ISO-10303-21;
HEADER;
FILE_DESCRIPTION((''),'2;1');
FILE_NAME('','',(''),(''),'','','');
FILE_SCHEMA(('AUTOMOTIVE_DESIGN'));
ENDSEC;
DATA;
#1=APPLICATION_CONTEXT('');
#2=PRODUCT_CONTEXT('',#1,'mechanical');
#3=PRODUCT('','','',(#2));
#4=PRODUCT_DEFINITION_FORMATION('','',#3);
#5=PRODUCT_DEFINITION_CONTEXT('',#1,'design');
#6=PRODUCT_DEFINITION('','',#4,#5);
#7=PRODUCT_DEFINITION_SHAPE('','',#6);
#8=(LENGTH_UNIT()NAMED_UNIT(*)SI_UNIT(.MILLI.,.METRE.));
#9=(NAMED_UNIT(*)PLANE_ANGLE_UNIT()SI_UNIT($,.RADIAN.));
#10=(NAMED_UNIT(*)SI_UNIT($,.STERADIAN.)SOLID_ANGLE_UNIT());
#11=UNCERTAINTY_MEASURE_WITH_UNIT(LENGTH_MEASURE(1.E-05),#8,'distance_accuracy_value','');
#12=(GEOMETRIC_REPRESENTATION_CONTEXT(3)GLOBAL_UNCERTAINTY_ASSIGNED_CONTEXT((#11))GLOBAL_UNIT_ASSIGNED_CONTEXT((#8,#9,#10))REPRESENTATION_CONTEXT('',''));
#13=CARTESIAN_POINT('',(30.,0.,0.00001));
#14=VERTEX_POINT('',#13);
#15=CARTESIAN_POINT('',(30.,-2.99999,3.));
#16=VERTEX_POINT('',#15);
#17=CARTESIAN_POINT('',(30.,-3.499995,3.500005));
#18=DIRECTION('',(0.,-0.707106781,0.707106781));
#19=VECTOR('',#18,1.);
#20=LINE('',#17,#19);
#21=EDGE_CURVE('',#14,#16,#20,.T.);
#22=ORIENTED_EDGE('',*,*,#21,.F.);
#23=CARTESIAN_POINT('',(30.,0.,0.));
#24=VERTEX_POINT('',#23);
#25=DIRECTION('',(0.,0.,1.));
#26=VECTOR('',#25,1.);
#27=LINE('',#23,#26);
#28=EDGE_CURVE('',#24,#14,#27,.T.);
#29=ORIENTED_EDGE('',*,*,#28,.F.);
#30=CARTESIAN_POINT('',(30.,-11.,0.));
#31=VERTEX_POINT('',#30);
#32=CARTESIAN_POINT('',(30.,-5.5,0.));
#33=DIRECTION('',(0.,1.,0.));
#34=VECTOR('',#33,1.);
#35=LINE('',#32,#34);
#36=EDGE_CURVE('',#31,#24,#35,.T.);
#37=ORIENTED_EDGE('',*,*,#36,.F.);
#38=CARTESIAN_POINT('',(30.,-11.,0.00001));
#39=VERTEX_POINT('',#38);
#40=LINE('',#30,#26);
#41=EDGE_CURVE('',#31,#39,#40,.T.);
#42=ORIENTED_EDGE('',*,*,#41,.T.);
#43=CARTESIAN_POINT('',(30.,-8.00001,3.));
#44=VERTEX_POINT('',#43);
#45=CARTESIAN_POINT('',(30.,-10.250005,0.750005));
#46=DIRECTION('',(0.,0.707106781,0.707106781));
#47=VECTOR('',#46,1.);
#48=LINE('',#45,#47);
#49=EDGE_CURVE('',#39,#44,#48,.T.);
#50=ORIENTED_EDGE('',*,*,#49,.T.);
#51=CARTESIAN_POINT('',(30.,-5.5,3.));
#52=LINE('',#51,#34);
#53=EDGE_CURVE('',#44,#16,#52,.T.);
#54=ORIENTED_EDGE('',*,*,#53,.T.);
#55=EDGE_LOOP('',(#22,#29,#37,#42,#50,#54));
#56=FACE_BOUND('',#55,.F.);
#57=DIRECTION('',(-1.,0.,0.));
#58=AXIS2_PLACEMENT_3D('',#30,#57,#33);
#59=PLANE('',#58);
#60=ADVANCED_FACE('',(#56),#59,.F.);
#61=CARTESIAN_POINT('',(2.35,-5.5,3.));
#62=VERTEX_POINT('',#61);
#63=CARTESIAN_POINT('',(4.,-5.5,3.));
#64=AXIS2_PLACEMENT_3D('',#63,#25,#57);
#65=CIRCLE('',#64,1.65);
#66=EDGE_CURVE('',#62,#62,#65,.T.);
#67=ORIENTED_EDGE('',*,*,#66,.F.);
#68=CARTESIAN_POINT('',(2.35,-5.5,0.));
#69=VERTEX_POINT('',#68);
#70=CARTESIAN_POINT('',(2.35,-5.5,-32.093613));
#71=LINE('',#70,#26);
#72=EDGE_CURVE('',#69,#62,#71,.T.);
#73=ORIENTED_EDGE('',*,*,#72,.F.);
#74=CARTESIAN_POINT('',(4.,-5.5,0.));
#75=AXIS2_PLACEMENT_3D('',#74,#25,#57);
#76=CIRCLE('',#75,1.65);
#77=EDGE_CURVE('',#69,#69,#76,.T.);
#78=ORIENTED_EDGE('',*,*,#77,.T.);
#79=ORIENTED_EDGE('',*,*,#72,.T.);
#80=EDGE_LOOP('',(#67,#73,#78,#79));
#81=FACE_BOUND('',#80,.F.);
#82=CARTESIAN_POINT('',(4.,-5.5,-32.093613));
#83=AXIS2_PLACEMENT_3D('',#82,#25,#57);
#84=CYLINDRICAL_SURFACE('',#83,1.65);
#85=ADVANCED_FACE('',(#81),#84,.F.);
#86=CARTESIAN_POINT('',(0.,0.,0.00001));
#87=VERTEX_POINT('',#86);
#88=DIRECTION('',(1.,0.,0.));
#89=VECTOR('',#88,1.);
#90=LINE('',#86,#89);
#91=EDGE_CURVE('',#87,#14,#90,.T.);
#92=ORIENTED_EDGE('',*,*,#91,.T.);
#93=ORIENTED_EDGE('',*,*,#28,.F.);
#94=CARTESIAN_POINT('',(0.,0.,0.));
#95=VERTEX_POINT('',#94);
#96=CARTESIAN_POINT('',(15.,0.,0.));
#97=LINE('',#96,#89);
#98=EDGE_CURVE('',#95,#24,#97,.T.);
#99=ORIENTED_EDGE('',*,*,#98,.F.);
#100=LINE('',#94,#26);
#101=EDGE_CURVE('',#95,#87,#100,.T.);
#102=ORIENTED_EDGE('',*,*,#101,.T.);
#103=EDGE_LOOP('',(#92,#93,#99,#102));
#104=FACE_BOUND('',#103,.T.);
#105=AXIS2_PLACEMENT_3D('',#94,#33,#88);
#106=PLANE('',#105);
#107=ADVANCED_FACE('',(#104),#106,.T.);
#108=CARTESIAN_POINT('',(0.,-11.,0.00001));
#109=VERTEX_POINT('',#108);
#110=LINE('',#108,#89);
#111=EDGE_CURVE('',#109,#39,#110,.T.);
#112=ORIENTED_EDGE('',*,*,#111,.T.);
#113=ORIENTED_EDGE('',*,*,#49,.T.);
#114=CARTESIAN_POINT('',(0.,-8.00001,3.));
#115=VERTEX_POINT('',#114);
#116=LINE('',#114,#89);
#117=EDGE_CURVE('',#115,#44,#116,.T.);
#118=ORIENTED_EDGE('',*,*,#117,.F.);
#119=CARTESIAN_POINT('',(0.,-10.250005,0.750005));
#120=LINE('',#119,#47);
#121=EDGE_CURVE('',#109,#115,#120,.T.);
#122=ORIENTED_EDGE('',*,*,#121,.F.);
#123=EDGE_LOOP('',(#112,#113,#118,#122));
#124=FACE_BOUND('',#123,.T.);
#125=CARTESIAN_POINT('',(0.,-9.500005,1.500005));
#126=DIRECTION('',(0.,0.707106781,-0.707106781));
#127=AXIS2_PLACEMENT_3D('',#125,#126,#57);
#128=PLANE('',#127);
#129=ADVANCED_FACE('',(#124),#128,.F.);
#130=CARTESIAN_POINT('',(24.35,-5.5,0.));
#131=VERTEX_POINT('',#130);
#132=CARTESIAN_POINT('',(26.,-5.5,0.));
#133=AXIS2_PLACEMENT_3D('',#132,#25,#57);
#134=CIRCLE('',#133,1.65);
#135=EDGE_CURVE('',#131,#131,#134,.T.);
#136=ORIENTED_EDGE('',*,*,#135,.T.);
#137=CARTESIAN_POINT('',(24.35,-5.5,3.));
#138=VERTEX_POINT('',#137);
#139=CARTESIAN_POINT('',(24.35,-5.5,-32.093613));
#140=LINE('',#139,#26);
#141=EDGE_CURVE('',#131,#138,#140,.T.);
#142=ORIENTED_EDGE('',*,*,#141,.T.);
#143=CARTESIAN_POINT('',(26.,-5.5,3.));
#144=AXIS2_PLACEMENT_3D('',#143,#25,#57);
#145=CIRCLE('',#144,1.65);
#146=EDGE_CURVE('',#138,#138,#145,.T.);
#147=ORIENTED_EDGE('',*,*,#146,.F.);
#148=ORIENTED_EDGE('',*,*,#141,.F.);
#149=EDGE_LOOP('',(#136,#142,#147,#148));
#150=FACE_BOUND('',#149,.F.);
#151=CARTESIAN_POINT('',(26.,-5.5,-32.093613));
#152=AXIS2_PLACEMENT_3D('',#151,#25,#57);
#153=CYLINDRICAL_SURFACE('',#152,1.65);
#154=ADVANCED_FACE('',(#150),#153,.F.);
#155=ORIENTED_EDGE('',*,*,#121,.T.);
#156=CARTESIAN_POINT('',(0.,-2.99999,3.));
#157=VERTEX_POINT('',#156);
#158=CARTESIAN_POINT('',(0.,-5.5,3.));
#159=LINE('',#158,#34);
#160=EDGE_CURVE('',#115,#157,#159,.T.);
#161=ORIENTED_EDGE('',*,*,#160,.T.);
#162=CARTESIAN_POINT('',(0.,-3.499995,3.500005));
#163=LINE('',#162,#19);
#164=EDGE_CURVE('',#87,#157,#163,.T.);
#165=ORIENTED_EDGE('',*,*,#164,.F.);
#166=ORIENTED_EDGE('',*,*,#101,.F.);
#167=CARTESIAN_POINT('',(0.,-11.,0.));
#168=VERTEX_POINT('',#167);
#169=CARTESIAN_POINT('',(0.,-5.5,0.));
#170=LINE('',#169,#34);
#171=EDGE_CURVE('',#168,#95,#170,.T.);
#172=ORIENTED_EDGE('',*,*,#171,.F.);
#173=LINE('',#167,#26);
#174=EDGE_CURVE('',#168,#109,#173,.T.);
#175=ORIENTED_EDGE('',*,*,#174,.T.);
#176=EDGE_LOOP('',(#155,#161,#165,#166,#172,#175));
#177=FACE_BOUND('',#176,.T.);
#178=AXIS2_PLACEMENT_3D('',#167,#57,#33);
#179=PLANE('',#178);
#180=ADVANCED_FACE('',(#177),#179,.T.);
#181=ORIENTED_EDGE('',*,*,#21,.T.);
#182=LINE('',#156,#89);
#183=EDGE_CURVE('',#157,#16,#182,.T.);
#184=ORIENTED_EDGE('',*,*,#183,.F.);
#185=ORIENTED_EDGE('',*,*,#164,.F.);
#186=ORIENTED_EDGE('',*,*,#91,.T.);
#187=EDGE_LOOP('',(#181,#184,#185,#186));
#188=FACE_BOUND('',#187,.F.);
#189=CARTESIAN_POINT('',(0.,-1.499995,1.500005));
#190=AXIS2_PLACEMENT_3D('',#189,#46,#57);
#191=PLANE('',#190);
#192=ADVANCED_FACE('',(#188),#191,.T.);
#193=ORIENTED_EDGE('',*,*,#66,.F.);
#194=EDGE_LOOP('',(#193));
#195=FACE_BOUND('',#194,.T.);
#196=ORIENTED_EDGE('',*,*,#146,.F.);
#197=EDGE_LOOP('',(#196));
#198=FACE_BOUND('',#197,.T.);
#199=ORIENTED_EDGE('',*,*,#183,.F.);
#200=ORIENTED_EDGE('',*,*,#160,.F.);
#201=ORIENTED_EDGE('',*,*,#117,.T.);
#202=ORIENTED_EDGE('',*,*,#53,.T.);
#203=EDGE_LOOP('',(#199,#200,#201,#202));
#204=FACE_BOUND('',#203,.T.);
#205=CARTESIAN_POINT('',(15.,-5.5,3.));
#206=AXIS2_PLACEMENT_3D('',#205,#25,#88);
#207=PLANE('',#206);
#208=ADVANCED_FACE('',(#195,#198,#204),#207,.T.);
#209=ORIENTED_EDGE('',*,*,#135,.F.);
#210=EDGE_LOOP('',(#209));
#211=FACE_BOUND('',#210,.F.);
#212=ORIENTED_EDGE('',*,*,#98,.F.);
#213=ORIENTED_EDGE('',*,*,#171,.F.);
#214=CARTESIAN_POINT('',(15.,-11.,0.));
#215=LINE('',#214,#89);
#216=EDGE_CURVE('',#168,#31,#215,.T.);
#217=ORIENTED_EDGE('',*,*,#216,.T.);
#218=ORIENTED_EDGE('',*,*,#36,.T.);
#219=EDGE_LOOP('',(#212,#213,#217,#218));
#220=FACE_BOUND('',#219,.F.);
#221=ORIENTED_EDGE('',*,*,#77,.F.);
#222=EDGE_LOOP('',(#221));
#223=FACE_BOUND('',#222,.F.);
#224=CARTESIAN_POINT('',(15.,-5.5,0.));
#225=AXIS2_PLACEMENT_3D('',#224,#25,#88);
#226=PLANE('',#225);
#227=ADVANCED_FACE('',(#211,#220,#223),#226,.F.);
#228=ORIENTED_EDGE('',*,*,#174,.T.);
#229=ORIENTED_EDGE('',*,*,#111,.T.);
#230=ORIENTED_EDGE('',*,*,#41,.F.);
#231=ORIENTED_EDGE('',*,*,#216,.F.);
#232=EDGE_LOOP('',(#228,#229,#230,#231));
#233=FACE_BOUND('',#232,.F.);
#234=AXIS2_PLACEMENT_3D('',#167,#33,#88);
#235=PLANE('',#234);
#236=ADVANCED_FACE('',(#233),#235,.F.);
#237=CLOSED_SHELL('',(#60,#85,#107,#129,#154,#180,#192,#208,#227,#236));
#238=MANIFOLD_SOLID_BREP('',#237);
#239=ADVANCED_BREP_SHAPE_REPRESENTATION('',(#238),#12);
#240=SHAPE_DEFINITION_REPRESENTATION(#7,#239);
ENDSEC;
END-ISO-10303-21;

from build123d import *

# Parameters (mm, degrees)
F0_W     = 30
F0_H     = 11
F1_DEPTH = 3
F2_SIZE2 = 2.99999
F2_SIZE  = 2.99999
F3_D     = 3.3


# Not quite as in the source:
# - a fillet or chamfer is up to 0.001 mm smaller than in the source, because OpenCascade refuses the exact size


with BuildPart() as f1:
    # F0 (on Top) → F1 (new body)
    with BuildSketch(Plane.XY):
        with Locations((15, -5.5)):
            Rectangle(F0_W, F0_H)
    extrude(amount=F1_DEPTH)

    # F2 (size 3 and 3 in the source; OpenCascade refuses exactly that, so slightly less here)
    f2_edges = [f1.edges().sort_by_distance(p)[0] for p in [
        (15, -11, 3),
        (15, 0, 3),
    ]]
    chamfer(f2_edges, length=F2_SIZE, length2=F2_SIZE2)

    # F3 (through all)
    with Locations(Plane(origin=(0, 0, 0), x_dir=(1, 0, 0), z_dir=(0, 0, -1))):
        with Locations((4, 5.5), (26, 5.5)):
            Hole(F3_D / 2)


solid = f1.part
